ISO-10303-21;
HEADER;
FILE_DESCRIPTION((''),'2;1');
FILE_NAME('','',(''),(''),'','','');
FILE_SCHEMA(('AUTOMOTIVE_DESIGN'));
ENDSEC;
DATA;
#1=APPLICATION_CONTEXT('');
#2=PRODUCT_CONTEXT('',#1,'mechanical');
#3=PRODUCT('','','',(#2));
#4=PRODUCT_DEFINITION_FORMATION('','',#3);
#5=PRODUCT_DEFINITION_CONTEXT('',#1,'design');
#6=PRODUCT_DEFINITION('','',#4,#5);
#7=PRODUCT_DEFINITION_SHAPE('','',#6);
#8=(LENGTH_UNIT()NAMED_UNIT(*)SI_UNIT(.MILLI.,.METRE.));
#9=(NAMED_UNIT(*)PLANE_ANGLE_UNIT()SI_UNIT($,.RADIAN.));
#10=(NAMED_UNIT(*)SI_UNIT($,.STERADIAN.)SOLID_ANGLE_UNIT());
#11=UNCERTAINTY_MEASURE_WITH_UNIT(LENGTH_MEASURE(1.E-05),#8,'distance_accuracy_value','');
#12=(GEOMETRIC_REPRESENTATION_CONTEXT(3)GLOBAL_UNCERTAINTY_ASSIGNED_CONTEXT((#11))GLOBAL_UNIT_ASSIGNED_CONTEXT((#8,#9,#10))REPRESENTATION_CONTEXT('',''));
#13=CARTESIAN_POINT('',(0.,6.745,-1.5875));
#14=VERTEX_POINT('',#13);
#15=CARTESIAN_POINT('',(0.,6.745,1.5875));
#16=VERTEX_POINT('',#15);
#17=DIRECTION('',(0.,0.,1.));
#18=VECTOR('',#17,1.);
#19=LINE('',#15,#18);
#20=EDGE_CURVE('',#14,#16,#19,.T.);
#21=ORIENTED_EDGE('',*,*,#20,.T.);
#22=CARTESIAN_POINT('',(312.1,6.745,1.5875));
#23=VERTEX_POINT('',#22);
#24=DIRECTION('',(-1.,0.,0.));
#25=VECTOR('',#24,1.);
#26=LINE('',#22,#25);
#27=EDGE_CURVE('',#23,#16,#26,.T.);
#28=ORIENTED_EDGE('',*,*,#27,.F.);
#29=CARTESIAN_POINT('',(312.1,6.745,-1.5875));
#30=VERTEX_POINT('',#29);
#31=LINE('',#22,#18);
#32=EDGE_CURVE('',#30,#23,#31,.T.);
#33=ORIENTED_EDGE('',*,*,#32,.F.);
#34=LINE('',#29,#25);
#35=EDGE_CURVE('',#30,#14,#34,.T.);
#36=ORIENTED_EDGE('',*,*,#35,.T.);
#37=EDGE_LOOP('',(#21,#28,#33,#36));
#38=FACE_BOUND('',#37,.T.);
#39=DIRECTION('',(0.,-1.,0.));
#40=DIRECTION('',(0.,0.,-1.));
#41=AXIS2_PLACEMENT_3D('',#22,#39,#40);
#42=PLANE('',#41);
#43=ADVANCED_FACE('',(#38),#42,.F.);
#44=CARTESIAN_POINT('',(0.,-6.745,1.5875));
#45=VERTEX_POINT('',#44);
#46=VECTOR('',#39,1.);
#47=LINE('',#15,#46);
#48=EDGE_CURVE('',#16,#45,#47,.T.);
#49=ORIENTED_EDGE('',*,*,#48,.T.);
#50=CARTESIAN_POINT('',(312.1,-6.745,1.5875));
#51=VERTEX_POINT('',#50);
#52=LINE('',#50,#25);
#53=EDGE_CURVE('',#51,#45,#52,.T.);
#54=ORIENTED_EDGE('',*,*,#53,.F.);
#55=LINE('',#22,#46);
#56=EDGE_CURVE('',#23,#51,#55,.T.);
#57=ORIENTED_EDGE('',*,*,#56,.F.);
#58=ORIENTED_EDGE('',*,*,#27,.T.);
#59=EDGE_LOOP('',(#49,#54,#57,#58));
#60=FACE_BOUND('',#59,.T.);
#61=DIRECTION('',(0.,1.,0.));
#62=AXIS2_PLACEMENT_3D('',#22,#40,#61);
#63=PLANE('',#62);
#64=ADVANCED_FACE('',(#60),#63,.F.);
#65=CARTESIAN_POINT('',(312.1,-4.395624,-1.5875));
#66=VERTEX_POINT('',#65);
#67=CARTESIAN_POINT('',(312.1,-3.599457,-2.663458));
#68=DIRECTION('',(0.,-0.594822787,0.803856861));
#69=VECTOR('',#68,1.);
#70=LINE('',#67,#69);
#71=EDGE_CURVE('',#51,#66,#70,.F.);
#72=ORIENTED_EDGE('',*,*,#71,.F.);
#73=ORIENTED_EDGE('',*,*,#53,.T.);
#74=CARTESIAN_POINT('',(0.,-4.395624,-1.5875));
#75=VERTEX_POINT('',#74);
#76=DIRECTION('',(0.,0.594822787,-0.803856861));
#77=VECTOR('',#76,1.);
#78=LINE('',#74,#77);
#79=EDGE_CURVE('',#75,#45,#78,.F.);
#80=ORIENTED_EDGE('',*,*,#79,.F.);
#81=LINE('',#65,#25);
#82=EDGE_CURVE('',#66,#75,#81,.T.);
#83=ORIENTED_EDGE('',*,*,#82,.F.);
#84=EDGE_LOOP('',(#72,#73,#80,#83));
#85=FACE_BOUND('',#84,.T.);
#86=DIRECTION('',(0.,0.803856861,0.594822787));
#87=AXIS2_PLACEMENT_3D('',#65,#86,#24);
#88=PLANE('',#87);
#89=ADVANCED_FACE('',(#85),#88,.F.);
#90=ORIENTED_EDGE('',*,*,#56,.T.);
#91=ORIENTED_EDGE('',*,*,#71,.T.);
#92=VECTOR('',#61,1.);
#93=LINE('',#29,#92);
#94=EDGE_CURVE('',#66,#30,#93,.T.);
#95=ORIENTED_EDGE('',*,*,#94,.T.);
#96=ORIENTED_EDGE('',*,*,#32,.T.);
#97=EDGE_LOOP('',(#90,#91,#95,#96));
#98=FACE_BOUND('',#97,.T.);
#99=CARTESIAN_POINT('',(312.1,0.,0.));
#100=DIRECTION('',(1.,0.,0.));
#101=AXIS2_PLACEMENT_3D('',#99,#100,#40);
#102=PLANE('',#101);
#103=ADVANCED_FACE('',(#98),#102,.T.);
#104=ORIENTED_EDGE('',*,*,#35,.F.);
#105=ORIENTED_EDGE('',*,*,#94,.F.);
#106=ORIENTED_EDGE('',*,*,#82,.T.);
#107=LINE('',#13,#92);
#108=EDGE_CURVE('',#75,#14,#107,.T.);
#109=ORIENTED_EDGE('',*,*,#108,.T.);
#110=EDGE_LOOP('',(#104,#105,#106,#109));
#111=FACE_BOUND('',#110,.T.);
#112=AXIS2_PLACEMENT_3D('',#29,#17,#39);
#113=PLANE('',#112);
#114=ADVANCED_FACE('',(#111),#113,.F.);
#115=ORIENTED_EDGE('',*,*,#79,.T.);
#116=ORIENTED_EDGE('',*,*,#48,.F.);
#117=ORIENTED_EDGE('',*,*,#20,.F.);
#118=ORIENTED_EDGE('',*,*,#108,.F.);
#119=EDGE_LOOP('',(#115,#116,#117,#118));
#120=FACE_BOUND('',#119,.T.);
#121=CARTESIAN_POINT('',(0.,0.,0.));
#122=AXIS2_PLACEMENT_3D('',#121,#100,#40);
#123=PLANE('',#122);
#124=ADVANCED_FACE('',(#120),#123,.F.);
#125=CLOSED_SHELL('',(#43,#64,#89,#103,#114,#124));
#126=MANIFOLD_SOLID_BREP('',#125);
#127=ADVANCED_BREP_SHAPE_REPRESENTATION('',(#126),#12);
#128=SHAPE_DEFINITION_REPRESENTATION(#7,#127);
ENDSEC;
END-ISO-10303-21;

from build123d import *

# Parameters (mm, degrees)
SKETCH2_W           = 3.175
SKETCH2_H           = 13.49
BOSS_EXTRUDE1_DEPTH = 312.1
CHAMFER1_SIZE       = 2.349376413
CHAMFER1_SIZE_2     = 3.175


with BuildPart() as part:
    # Sketch2 → Boss-Extrude1 (new body)
    with BuildSketch(Plane(origin=(0, 0, 0), x_dir=(0, 0, -1), z_dir=(1, 0, 0))):
        Rectangle(SKETCH2_W, SKETCH2_H)
    extrude(amount=BOSS_EXTRUDE1_DEPTH)

    # Chamfer1
    # the kernel refuses this chamfer: 3.175, 2.349376413 mm, written as the material it takes off along each edge
    with BuildSketch(Plane(origin=(-8.194900993, -6.745, -1.5875), x_dir=(0, 0.9991149585695113, -0.0420630427173772), z_dir=(1, 0, 0))) as chamfer1_piece_1:
        Polygon((CHAMFER1_SIZE * 0.999114958661, CHAMFER1_SIZE * 0.0420630427212), (-CHAMFER1_SIZE_2 * 0.0420630427174, CHAMFER1_SIZE_2 * 0.99911495857), (0, 0), align=None)
    extrude(amount=328.489801986, mode=Mode.SUBTRACT)


solid = part.part
